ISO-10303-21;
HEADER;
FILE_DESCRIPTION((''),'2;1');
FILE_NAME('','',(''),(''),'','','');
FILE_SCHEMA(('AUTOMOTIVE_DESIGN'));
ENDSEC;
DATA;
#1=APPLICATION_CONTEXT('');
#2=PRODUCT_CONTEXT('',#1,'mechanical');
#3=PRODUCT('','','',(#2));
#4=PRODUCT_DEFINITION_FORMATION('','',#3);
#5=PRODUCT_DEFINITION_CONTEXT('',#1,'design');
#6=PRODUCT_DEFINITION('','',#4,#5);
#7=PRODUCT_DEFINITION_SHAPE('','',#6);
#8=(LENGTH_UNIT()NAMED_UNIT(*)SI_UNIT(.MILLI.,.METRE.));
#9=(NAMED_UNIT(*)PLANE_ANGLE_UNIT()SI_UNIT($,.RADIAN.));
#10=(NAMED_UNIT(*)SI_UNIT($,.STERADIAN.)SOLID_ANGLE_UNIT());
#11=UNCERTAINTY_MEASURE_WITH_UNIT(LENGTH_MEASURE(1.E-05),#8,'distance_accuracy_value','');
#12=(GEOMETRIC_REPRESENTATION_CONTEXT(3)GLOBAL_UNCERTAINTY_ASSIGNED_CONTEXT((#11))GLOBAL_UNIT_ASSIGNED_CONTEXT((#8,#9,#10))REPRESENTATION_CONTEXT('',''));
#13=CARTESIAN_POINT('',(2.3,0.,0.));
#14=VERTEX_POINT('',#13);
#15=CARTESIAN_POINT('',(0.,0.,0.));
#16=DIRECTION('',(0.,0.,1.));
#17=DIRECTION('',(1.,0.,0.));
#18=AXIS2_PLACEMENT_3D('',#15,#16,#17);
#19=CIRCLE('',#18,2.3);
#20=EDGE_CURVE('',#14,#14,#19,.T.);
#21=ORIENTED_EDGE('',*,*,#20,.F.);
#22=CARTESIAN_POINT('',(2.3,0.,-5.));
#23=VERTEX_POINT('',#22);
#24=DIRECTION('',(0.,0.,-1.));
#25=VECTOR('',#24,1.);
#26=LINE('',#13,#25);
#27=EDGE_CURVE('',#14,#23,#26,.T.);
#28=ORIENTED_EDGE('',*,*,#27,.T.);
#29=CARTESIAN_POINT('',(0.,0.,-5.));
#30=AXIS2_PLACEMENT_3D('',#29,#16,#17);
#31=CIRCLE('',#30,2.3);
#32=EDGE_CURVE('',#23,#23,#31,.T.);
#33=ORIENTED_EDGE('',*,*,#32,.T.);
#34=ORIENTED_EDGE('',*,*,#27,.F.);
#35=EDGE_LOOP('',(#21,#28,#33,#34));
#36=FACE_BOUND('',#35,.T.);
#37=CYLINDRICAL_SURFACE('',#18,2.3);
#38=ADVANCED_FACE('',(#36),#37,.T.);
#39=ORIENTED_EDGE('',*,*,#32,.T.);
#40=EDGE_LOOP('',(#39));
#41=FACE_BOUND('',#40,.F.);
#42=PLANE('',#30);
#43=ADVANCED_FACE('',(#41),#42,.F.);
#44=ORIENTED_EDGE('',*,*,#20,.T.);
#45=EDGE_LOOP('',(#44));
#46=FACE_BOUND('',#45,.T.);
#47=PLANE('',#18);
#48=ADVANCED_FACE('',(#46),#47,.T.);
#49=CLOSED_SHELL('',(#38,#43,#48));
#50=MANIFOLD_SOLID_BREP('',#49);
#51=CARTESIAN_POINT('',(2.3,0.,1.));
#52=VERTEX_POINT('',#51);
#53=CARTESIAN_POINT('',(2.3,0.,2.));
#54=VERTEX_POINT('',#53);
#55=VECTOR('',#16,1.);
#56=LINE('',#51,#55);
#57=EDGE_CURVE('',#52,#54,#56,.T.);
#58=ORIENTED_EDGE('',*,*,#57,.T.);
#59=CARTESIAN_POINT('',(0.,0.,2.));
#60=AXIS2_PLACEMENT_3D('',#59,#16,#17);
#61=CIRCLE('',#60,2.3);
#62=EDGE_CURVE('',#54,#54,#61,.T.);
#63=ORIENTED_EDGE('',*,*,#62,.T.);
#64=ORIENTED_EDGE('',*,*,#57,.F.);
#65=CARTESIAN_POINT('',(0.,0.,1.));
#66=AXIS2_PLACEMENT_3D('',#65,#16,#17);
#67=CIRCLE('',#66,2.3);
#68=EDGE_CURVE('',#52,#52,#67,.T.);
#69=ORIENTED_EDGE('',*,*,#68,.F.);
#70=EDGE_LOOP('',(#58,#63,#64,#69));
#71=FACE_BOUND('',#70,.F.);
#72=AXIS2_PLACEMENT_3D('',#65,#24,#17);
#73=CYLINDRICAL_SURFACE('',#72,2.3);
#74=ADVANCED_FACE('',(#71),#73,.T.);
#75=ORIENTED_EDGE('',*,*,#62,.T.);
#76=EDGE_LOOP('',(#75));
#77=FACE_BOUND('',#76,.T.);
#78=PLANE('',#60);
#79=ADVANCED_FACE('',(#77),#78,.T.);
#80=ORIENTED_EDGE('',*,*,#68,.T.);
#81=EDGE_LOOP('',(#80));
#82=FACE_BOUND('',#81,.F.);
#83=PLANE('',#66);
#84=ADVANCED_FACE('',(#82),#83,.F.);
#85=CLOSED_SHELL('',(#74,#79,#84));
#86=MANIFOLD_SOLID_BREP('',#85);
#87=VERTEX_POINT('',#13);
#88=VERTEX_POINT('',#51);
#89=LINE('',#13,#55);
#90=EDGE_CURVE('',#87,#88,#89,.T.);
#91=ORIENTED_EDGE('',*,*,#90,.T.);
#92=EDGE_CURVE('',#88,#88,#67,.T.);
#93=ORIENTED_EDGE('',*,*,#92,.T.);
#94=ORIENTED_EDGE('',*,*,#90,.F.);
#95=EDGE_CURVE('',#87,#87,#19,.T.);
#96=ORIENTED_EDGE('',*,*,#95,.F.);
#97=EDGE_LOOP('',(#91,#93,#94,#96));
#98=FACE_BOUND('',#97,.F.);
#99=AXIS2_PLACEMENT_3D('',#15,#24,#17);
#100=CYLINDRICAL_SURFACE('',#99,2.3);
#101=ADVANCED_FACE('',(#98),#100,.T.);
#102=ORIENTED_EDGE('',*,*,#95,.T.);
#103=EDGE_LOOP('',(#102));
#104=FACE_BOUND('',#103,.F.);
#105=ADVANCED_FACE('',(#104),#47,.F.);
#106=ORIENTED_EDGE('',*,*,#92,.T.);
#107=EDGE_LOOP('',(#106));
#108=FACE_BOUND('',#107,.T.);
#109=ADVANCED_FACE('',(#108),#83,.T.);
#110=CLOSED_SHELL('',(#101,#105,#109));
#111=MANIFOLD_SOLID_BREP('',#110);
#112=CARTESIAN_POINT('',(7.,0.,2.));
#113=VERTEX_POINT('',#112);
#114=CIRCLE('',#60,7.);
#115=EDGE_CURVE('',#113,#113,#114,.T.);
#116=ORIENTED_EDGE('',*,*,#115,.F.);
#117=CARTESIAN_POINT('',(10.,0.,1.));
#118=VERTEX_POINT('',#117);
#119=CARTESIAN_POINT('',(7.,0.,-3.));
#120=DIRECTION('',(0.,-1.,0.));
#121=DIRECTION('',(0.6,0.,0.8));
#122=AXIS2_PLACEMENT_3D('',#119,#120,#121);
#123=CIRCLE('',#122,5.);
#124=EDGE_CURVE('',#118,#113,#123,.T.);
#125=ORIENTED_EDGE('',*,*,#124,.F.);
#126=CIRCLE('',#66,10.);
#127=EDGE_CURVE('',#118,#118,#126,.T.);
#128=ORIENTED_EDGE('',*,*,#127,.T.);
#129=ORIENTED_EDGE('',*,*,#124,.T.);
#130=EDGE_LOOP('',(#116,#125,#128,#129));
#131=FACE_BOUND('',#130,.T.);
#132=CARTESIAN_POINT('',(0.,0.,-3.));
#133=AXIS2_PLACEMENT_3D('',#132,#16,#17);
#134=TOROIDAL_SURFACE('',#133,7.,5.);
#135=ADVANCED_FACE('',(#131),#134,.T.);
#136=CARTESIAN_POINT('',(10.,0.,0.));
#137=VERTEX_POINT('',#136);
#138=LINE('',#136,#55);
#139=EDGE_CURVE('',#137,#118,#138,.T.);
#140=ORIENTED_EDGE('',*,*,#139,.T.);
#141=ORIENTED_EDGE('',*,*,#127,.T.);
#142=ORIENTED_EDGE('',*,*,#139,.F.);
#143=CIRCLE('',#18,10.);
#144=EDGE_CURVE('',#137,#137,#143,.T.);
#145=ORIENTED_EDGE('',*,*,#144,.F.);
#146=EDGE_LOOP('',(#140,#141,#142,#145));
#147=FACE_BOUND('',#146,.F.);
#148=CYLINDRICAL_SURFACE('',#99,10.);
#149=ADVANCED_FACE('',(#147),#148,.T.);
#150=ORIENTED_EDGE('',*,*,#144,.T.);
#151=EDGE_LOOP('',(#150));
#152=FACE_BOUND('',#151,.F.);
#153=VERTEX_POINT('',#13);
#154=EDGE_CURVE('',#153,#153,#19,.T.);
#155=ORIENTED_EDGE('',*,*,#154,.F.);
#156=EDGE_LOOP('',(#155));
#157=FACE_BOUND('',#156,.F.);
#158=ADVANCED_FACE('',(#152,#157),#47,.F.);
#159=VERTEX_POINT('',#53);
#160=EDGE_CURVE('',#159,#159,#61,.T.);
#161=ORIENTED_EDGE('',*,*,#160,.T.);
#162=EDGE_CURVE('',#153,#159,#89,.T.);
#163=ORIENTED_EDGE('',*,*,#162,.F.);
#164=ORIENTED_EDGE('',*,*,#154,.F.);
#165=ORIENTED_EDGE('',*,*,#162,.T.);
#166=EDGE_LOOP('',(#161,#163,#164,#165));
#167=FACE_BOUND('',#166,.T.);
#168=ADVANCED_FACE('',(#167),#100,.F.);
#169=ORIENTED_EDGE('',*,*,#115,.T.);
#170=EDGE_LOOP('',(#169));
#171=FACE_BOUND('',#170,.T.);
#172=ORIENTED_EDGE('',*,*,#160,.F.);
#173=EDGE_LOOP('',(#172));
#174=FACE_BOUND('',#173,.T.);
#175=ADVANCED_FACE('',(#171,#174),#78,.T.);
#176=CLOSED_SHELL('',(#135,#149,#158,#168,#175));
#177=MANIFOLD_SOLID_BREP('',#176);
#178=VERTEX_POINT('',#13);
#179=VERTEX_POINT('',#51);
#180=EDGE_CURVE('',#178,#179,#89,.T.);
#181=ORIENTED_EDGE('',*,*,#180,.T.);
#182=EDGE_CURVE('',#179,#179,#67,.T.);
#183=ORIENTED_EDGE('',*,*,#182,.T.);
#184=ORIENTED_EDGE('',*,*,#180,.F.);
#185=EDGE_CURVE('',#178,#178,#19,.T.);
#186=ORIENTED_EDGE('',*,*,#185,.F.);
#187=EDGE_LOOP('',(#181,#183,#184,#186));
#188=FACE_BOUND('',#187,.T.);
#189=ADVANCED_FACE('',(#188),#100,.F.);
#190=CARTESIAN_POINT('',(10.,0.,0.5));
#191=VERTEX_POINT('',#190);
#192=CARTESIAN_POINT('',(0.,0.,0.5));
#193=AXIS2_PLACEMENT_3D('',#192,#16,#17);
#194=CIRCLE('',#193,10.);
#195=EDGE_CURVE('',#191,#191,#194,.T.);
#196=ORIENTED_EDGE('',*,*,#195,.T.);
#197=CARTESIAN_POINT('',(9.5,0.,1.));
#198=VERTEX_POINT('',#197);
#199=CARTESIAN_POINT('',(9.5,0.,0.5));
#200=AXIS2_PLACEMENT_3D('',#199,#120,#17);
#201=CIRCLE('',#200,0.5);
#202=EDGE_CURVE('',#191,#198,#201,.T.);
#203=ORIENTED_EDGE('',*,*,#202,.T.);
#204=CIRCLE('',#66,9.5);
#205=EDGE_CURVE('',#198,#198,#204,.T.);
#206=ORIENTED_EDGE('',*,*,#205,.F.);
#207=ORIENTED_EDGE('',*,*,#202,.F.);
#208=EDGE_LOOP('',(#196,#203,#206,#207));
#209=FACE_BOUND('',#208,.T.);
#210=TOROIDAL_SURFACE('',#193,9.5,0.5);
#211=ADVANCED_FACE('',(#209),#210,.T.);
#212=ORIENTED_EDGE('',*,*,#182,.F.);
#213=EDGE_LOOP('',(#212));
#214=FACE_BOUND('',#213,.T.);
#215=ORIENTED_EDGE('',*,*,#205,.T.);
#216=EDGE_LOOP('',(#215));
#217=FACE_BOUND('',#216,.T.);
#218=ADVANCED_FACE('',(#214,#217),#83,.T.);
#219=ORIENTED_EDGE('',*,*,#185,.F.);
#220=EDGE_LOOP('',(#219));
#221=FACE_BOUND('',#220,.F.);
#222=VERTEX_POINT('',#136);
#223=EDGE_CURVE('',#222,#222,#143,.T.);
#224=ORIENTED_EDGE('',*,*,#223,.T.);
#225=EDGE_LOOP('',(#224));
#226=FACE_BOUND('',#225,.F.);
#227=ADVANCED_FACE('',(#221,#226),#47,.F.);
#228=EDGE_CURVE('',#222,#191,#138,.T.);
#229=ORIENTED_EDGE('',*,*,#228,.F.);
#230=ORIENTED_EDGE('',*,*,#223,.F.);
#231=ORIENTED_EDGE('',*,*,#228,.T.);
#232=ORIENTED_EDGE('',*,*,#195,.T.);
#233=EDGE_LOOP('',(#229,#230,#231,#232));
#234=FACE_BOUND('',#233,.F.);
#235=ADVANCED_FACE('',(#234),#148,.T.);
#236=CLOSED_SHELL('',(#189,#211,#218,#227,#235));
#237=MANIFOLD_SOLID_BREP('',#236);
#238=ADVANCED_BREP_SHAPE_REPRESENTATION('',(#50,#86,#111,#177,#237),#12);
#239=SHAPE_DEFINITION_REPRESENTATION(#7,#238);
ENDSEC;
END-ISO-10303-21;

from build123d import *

# Parameters (mm, degrees)
F0_R     = 10
F0_R_2   = 2.3
F1_DEPTH = 1
F2_R     = 0.5
F3_DEPTH = 5
F4_DEPTH = 1
F5_DEPTH = 2
F6_DEPTH = 1
F7_SIZE  = 1


# Not quite as in the source:
# - a fillet or chamfer that OpenCascade refuses, or shapes differently, is made with other operations: its cross-section is extruded or revolved along the edge and cut away or added


with BuildPart() as f1:
    # F0 (on Top) → F1 (new body)
    with BuildSketch(Plane.XY):
        Circle(F0_R)
        Circle(F0_R_2, mode=Mode.SUBTRACT)
    extrude(amount=F1_DEPTH)

    # F2
    f2_edges = [f1.edges().sort_by_distance(p)[0] for p in [
        (-10, 0, 1),
    ]]
    fillet(f2_edges, radius=F2_R)

    # F0 (on Top) → F3 (join)
    with BuildSketch(Plane.XY):
        Circle(F0_R_2)
    extrude(amount=-F3_DEPTH)


with BuildPart() as f4:
    # F4 (new): a face of the model
    f4_faces = [f1.part.faces().sort_by_distance(p)[0] for p in [
        (0, 0, 0),
    ]]
    extrude(f4_faces, amount=F4_DEPTH)


with BuildPart() as f5:
    # F5 (new): a face of the model
    f5_faces = [f1.part.faces().sort_by_distance(p)[0] for p in [
        (-9.7171572875, 0, 0),
    ]]
    extrude(f5_faces, amount=-F5_DEPTH)

    # F7
    f7_edges = [f5.edges().sort_by_distance(p)[0] for p in [
        (-10, 0, 2),
    ]]
    chamfer(f7_edges, length=F7_SIZE)

    # F8: fillet of radius 5 on 1 edges, made by hand

    # F8_s1 → F8_t2 (revolve, cut)
    with BuildSketch(Plane.XZ):
        with BuildLine():
            ThreePointArc((10, 1), (8.5811388301, 1.7434164903), (7, 2))
            Line((7, 2), (9, 2))
            Line((9, 2), (10, 1))
        make_face()
    revolve(axis=Axis((0, 0, 2), (0, 0, 1)), mode=Mode.SUBTRACT)


with BuildPart() as f6:
    # F6 (new): a face of the model
    f6_faces = [f4.part.faces().sort_by_distance(p)[0] for p in [
        (0, 0, 1),
    ]]
    extrude(f6_faces, amount=F6_DEPTH)


solid = Compound([f1.part, f4.part, f5.part, f6.part])
